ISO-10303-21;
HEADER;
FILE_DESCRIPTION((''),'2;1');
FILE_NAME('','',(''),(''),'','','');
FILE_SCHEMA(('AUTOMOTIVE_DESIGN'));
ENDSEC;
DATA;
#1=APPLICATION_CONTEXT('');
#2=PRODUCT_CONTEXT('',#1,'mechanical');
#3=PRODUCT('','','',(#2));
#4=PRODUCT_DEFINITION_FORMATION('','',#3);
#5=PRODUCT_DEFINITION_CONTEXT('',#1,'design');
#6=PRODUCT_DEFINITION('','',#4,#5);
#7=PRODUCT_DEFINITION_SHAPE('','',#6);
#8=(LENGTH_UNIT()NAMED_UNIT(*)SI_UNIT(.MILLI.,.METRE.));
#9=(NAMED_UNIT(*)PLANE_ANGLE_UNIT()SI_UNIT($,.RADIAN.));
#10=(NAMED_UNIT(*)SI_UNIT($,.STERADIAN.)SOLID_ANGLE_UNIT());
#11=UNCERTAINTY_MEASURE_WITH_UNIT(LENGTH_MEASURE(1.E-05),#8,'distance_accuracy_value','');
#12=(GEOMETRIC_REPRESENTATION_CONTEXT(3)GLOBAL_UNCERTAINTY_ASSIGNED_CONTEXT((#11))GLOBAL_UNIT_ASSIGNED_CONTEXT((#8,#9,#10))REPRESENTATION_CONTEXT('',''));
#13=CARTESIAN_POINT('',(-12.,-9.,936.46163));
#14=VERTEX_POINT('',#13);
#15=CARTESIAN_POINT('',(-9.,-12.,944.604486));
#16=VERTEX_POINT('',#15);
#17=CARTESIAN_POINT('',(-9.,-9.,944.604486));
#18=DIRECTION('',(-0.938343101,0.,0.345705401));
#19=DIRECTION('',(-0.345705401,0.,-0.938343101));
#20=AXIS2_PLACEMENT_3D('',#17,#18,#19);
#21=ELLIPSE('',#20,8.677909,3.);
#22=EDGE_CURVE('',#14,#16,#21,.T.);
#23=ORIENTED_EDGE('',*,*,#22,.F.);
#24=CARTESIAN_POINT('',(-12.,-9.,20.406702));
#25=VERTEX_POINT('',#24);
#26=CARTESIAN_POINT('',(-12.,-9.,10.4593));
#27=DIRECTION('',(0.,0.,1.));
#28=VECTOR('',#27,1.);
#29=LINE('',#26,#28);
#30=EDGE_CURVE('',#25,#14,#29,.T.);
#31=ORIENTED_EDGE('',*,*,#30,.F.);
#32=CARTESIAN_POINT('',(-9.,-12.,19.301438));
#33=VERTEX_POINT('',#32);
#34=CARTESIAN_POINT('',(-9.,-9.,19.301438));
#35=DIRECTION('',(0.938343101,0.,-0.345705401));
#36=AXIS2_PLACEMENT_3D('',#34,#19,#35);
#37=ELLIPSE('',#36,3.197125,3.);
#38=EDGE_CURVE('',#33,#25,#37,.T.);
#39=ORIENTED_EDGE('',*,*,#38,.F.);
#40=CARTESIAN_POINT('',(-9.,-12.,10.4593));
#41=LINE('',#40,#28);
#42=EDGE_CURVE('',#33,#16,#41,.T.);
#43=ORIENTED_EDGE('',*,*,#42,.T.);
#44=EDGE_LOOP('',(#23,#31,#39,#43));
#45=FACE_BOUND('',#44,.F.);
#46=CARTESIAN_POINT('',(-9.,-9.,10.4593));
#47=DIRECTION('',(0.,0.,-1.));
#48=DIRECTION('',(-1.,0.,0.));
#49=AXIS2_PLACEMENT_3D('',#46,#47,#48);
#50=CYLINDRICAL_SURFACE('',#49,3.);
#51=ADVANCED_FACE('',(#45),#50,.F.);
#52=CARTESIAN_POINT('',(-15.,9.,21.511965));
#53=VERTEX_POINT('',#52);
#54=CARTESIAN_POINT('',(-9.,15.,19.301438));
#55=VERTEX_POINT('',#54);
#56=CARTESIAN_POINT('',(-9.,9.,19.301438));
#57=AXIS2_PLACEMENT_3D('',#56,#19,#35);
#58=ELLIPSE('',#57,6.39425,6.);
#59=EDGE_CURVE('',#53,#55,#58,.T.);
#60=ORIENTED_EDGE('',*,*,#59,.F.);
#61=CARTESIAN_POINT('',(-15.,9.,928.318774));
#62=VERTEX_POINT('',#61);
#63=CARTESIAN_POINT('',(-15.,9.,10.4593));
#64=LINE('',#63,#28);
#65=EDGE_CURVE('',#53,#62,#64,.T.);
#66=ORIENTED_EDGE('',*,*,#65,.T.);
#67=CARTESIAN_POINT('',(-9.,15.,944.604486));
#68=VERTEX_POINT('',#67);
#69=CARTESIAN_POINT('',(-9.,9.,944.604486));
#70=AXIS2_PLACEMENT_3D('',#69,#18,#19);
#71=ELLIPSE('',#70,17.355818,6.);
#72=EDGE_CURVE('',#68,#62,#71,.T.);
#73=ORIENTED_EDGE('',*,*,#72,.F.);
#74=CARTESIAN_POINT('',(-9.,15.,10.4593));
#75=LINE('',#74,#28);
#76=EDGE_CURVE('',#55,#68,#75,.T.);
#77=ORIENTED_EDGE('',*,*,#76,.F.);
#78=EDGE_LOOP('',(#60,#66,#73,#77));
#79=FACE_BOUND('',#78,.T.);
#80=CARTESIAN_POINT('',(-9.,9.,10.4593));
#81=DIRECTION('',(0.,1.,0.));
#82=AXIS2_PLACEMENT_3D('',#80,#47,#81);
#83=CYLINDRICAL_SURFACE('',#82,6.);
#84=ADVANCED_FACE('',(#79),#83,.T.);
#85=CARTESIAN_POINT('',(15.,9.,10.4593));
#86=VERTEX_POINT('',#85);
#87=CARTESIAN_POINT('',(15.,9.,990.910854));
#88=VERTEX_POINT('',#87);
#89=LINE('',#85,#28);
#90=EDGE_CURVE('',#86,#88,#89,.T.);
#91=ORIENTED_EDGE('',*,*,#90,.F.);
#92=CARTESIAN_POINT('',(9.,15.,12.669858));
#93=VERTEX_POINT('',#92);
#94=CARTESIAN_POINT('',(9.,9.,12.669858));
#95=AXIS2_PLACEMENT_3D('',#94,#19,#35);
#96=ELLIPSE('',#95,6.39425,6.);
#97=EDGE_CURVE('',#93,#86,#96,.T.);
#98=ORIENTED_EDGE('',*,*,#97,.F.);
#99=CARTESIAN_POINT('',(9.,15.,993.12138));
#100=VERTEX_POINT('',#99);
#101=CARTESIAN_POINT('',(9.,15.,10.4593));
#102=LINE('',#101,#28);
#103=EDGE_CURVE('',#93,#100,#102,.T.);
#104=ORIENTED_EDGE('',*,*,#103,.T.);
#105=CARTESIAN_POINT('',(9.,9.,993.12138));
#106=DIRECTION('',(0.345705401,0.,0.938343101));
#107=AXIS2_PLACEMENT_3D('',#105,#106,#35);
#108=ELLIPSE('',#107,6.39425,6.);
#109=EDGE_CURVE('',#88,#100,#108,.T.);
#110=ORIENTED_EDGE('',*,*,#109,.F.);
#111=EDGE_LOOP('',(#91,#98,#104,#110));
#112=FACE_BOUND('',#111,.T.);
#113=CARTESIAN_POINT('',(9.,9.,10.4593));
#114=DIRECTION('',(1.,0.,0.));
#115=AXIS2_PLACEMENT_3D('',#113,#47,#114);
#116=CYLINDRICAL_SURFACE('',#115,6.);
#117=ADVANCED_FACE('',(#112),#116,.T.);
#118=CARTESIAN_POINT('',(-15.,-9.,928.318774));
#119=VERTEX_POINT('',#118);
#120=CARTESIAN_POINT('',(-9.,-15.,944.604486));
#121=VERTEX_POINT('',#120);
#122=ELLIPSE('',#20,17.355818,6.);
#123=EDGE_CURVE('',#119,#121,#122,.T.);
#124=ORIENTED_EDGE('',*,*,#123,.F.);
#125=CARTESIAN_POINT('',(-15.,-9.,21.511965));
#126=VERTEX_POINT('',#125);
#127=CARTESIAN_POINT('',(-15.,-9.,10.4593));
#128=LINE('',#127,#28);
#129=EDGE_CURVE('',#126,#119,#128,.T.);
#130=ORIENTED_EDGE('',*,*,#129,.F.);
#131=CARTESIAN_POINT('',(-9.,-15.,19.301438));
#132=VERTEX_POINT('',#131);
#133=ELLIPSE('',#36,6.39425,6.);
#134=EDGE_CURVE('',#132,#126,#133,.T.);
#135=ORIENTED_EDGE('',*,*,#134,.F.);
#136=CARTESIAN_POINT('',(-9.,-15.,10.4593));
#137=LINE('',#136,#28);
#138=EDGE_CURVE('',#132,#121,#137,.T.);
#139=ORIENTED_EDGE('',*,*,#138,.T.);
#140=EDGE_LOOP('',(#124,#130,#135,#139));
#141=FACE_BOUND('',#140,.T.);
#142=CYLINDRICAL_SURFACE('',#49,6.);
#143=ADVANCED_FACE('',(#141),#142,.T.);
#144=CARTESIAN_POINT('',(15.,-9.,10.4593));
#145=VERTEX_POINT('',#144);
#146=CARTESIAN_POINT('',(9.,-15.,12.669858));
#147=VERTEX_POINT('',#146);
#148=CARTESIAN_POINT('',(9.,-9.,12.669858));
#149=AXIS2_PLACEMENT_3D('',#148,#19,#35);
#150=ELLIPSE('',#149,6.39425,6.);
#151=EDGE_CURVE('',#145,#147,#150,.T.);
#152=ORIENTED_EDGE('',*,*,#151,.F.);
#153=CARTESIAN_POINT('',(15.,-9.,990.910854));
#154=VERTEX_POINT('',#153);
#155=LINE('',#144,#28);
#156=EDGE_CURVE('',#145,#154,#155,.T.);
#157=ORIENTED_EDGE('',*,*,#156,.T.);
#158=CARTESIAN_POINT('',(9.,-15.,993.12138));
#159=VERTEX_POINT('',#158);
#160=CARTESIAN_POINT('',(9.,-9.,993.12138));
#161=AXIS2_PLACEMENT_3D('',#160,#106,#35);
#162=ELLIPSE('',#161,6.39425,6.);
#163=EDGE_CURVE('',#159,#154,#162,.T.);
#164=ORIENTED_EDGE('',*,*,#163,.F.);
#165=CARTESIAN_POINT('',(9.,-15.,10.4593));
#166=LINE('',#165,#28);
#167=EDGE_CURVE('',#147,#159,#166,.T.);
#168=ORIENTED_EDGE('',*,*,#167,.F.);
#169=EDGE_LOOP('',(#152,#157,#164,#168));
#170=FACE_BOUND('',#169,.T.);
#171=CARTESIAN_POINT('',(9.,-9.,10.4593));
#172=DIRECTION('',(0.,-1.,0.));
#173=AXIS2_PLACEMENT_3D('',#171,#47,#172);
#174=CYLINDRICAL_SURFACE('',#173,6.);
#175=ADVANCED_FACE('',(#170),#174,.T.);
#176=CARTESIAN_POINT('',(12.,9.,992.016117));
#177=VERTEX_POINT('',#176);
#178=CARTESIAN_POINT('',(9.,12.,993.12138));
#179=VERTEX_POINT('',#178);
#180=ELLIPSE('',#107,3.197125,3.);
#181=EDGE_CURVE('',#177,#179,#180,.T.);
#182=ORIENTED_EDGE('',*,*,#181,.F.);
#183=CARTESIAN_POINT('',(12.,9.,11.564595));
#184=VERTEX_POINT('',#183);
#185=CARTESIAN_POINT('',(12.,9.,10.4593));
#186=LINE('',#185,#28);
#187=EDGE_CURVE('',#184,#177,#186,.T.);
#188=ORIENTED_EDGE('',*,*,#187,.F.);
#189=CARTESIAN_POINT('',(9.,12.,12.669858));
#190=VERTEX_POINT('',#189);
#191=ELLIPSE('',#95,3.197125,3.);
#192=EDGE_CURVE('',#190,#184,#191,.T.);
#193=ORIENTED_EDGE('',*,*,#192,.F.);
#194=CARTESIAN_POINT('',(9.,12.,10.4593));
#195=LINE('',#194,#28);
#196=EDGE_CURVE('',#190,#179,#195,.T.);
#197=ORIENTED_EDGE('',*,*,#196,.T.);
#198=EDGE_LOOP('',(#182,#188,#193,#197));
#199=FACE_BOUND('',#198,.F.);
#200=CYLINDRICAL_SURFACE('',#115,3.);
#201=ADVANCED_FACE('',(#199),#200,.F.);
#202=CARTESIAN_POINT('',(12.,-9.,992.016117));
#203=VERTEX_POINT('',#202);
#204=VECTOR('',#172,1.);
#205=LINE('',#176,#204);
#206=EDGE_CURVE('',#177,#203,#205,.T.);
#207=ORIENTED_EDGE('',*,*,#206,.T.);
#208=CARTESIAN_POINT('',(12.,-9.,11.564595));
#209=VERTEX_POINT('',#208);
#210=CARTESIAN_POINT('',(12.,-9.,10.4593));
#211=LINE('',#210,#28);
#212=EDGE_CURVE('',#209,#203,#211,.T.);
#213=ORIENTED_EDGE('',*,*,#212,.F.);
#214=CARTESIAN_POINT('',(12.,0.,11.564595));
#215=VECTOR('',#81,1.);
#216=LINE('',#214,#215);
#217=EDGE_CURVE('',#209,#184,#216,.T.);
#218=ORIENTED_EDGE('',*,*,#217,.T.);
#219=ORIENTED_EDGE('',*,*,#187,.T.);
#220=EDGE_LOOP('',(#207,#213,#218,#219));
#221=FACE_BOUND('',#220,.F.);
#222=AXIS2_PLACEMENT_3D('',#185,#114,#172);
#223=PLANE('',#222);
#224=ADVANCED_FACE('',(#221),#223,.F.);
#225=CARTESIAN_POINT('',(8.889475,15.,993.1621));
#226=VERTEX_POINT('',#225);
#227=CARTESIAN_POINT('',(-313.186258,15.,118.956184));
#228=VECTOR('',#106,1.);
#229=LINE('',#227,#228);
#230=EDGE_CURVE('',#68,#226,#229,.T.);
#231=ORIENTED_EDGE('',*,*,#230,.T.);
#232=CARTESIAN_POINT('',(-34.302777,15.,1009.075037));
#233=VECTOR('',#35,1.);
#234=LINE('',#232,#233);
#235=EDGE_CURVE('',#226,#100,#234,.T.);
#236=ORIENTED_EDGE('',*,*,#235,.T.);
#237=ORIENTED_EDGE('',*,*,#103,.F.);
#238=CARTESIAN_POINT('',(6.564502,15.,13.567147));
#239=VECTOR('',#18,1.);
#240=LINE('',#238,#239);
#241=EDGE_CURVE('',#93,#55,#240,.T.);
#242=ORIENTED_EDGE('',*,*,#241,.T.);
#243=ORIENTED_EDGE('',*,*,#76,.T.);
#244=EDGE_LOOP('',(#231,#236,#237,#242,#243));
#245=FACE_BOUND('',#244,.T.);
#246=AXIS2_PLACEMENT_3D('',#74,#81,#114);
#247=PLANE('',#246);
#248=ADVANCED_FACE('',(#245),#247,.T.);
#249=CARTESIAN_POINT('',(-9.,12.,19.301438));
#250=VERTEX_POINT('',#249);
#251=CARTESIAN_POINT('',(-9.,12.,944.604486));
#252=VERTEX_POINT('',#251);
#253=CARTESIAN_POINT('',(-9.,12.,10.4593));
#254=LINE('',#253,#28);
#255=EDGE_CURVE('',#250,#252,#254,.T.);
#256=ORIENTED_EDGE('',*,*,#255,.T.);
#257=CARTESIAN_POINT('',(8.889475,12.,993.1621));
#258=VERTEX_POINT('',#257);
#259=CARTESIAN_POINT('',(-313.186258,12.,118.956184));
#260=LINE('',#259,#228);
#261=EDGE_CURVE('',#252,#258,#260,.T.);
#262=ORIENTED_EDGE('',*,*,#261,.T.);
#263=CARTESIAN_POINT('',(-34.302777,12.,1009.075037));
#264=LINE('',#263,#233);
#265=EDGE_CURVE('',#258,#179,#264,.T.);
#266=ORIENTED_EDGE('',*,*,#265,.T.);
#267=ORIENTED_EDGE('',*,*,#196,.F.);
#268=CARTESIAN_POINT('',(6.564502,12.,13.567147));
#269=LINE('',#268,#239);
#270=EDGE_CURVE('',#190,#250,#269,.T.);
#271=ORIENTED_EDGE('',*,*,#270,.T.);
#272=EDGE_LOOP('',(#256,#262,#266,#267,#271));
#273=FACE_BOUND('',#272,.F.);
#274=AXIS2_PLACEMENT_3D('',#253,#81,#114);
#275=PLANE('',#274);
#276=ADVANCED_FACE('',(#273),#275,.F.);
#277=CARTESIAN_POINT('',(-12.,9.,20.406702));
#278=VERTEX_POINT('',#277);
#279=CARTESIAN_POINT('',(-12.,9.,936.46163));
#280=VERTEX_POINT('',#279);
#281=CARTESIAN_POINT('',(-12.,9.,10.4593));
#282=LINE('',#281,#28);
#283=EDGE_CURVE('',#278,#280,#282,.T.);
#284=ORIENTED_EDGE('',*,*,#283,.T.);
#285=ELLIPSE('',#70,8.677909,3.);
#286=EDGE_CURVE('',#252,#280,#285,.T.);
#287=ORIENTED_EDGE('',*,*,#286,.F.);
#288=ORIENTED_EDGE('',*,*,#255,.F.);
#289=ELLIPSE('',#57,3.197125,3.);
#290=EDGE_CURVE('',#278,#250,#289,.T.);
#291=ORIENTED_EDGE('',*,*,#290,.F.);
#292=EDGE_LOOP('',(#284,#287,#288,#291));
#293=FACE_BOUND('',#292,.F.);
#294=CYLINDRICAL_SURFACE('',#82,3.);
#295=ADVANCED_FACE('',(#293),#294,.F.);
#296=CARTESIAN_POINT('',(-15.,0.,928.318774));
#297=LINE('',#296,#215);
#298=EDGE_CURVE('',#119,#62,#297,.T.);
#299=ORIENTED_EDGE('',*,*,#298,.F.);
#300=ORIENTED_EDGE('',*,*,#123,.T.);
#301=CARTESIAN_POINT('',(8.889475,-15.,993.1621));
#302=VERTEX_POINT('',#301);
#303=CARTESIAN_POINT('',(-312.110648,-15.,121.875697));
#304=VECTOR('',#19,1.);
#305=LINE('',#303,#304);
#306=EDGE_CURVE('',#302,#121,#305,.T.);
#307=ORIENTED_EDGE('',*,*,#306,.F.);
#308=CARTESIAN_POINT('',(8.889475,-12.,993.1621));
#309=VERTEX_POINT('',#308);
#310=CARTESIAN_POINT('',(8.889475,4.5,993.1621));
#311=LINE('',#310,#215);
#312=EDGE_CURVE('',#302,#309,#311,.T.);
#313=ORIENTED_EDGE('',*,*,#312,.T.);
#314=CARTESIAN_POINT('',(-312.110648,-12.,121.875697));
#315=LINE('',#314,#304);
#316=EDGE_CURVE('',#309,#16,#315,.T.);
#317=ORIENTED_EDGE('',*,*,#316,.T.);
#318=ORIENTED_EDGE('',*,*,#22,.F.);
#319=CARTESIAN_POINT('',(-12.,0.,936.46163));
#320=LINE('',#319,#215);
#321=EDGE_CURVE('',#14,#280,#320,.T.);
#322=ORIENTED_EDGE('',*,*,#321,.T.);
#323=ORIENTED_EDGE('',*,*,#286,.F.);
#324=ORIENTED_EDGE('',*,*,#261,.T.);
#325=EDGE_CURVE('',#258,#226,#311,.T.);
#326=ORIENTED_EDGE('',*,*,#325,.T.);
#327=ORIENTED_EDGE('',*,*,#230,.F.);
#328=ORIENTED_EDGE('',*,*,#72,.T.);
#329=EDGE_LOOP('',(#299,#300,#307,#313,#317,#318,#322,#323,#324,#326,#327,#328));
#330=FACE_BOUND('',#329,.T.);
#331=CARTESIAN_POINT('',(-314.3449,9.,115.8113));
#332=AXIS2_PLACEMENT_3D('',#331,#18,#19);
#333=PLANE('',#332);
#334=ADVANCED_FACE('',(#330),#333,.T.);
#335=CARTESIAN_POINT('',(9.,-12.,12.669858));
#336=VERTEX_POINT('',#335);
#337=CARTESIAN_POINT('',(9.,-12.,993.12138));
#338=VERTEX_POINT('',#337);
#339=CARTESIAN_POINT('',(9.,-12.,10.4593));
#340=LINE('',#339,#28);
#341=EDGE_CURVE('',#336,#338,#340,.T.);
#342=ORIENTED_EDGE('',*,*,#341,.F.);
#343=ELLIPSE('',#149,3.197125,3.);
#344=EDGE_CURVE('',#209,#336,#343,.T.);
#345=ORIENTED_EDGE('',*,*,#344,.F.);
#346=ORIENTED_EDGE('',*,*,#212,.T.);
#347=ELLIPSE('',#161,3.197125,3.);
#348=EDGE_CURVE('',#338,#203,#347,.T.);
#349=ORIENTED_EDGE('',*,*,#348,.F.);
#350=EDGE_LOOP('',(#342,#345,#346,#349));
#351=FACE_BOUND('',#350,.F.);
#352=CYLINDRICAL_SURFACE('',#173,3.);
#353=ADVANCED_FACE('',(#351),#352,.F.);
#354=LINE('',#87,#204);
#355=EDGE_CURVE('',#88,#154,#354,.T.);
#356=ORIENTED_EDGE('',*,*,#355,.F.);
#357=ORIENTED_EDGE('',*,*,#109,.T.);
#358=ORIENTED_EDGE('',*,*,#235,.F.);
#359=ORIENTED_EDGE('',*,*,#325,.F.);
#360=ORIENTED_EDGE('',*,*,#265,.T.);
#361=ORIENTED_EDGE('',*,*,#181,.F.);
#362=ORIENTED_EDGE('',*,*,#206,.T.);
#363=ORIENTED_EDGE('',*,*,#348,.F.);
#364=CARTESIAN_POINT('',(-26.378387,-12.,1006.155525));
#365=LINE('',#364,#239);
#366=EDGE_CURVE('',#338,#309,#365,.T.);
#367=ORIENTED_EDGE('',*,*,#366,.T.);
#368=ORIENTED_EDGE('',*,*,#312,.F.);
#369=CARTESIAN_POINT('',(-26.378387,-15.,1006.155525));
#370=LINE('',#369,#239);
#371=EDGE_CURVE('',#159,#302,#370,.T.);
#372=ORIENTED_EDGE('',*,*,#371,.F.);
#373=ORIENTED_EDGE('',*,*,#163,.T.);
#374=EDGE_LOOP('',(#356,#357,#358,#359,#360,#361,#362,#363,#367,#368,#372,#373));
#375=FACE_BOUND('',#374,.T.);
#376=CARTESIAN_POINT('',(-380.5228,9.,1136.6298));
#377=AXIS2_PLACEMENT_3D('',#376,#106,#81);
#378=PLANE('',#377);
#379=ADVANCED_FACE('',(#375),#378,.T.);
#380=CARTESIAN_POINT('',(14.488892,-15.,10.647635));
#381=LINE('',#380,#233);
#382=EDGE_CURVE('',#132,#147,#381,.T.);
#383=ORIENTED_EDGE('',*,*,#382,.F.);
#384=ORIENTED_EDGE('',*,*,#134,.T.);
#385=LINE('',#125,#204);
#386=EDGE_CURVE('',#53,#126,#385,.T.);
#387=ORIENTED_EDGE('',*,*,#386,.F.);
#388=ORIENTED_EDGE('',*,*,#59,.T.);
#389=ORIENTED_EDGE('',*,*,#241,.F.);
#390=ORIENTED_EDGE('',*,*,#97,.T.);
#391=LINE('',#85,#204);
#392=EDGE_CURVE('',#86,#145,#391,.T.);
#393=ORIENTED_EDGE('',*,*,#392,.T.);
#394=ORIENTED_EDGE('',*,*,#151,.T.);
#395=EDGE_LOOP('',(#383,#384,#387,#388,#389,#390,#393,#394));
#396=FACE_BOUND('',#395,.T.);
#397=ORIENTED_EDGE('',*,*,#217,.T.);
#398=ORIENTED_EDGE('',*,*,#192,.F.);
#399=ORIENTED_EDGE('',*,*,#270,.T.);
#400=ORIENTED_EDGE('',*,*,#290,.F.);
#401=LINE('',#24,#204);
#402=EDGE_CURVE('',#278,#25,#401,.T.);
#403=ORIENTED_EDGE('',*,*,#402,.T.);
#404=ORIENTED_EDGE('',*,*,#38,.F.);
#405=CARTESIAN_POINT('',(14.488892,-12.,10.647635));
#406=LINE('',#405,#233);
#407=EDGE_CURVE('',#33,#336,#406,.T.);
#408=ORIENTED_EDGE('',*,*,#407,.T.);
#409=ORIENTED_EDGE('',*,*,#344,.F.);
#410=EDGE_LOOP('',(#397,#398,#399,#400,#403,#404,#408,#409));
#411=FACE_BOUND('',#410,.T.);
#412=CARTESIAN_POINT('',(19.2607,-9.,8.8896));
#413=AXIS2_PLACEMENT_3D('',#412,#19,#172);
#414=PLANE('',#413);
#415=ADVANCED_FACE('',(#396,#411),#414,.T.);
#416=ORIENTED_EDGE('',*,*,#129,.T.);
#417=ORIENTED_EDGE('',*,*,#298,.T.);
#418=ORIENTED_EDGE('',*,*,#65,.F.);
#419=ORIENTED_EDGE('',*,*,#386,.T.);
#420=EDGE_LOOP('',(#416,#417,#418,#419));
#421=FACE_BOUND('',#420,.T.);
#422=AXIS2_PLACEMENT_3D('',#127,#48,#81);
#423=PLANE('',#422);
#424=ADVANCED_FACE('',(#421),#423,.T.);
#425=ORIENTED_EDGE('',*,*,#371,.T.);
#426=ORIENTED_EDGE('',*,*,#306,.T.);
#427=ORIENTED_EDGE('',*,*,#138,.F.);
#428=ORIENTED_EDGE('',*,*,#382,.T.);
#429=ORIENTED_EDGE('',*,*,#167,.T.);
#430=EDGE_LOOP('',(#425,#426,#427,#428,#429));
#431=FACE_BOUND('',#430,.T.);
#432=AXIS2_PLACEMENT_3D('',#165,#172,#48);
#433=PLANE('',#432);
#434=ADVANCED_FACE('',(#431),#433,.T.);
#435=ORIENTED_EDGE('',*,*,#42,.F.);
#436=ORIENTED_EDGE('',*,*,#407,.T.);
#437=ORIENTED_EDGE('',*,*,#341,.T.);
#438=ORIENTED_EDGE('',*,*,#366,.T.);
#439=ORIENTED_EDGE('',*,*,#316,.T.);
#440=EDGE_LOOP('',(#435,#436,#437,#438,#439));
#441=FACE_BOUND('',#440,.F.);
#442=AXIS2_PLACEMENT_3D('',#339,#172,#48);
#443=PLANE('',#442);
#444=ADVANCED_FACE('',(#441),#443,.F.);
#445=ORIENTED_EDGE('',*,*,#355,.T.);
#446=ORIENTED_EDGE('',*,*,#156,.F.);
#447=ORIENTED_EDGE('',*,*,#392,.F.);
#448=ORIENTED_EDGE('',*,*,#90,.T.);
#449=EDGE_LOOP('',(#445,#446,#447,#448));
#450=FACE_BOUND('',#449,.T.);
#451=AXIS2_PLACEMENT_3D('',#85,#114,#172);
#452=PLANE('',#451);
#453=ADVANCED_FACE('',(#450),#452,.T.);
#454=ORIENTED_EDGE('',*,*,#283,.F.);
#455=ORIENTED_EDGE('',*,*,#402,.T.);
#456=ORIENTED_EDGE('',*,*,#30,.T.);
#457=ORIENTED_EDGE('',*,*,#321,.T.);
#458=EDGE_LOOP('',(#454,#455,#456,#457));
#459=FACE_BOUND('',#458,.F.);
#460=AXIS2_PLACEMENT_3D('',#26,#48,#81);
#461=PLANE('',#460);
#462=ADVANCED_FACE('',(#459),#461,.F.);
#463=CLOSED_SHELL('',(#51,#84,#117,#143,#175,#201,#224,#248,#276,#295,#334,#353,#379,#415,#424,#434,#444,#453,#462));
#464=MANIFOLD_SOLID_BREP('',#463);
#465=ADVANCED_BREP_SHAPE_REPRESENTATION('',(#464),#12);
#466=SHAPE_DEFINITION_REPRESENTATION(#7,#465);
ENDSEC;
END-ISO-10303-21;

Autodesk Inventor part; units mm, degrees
ref_plane "Start Plane" through (0, 0, 10.4593) normal (0, 0, 1) x (1, 0, 0)
ref_plane "End Plane" through (0, 0, 993.1621) normal (0, 0, 1) x (1, 0, 0)
sketch "Sketch" plane through (0, 0, 0) normal (0, 0, 1) x (1, 0, 0)
  line L0 (-15, -9) -> (-15, 9)
  line L1 (-9, 15) -> (9, 15)
  line L2 (15, 9) -> (15, -9)
  line L3 (9, -15) -> (-9, -15)
  arc A0 (-15, -9) -> (-9, -15) centre (-9, -9) ccw
  arc A1 (-9, 15) -> (-15, 9) centre (-9, 9) ccw
  arc A2 (15, 9) -> (9, 15) centre (9, 9) ccw
  arc A3 (9, -15) -> (15, -9) centre (9, -9) ccw
  arc A4 (-9, 12) -> (-12, 9) centre (-9, 9) ccw
  line L4 (-9, 12) -> (9, 12)
  arc A5 (12, 9) -> (9, 12) centre (9, 9) ccw
  line L5 (12, 9) -> (12, -9)
  arc A6 (9, -12) -> (12, -9) centre (9, -9) ccw
  line L6 (9, -12) -> (-9, -12)
  arc A7 (-12, -9) -> (-9, -12) centre (-9, -9) ccw
  line L7 (-12, -9) -> (-12, 9)
  line L8 (0, 22.7397) -> (0, -22.7397) construction
  line L9 (-22.7397, 0) -> (22.7397, 0) construction
  dimension "d7" = 6
  dimension "d10" = 30
  dimension "d11" = 30
  dimension "d12" = 3
  dimension "d15" = 15
  dimension "d16" = 15
extrude "Body" add sketch "Sketch" along normal up to surface (982.7028 mm away) from surface at 10.4593
sketch "Sketch3" plane through (0, 0, 0) normal (0, 0, 1) x (1, 0, 0)
  line L0 (0, 0) -> (10, 0)
ref_plane "Work Plane3" through (0, 0, 0) normal (0, -1, 0) x (1, 0, 0)
ref_plane "Work Plane4" through (19.2607, -9, 8.8896) normal (-0.3457054, 0, -0.9383431) x (-0.9383431, 0, 0.3457054)
split "Split1" plane through (19.2607, -9, 8.8896) removes the side toward (-0.3457054, 0, -0.9383431)
ref_plane "Work Plane5" through (-380.5228, 9, 1136.6298) normal (0.3457054, 0, 0.9383431) x (0.9383431, 0, -0.3457054)
split "Split2" plane through (-380.5228, 9, 1136.6298) removes the side toward (0.3457054, 0, 0.9383431)
ref_plane "Work Plane6" through (-314.3449, 9, 115.8113) normal (-0.9383431, 0, 0.3457054) x (0.3457054, 0, 0.9383431)
split "Split3" plane through (-314.3449, 9, 115.8113) removes the side toward (-0.9383431, 0, 0.3457054)
sketch "Sketch4" plane through (0, 0, 0) normal (0, -1, 0) x (1, 0, 0)
  line L0 (-2, 10.4593) -> (12, 10.4593) projected
  line L1 (-2, 993.1621) -> (12, 993.1621) projected
  dimension "d18" = 982.7028
equation "\"d7\" = G_IR"
equation "\"d10\" = G_H"
equation "\"d11\" = G_W"
equation "\"d12\" = G_T"
equation "\"d15\" = 0.5 * d10"
equation "\"d16\" = 0.5 * d11"
equation "\"d3\" = G_L"
equation "\"G_W\" = 30"
equation "\"G_H\" = 30"
equation "\"G_T\" = 3"
equation "\"G_IR\" = 6"
equation "\"G_L\" = d18"
equation "\"G_OFFSET_START\" = -10.45931"
equation "\"G_OFFSET_END\" = -19.26073"
equation "\"d13\" = -G_OFFSET_START"
equation "\"d14\" = G_OFFSET_END + B_L"
equation "\"B_L\" = 1012.42284"
properties part number "DIN EN 10219-2 - 30 x 30 x 3  - 982.7" material "Steel, Mild"
